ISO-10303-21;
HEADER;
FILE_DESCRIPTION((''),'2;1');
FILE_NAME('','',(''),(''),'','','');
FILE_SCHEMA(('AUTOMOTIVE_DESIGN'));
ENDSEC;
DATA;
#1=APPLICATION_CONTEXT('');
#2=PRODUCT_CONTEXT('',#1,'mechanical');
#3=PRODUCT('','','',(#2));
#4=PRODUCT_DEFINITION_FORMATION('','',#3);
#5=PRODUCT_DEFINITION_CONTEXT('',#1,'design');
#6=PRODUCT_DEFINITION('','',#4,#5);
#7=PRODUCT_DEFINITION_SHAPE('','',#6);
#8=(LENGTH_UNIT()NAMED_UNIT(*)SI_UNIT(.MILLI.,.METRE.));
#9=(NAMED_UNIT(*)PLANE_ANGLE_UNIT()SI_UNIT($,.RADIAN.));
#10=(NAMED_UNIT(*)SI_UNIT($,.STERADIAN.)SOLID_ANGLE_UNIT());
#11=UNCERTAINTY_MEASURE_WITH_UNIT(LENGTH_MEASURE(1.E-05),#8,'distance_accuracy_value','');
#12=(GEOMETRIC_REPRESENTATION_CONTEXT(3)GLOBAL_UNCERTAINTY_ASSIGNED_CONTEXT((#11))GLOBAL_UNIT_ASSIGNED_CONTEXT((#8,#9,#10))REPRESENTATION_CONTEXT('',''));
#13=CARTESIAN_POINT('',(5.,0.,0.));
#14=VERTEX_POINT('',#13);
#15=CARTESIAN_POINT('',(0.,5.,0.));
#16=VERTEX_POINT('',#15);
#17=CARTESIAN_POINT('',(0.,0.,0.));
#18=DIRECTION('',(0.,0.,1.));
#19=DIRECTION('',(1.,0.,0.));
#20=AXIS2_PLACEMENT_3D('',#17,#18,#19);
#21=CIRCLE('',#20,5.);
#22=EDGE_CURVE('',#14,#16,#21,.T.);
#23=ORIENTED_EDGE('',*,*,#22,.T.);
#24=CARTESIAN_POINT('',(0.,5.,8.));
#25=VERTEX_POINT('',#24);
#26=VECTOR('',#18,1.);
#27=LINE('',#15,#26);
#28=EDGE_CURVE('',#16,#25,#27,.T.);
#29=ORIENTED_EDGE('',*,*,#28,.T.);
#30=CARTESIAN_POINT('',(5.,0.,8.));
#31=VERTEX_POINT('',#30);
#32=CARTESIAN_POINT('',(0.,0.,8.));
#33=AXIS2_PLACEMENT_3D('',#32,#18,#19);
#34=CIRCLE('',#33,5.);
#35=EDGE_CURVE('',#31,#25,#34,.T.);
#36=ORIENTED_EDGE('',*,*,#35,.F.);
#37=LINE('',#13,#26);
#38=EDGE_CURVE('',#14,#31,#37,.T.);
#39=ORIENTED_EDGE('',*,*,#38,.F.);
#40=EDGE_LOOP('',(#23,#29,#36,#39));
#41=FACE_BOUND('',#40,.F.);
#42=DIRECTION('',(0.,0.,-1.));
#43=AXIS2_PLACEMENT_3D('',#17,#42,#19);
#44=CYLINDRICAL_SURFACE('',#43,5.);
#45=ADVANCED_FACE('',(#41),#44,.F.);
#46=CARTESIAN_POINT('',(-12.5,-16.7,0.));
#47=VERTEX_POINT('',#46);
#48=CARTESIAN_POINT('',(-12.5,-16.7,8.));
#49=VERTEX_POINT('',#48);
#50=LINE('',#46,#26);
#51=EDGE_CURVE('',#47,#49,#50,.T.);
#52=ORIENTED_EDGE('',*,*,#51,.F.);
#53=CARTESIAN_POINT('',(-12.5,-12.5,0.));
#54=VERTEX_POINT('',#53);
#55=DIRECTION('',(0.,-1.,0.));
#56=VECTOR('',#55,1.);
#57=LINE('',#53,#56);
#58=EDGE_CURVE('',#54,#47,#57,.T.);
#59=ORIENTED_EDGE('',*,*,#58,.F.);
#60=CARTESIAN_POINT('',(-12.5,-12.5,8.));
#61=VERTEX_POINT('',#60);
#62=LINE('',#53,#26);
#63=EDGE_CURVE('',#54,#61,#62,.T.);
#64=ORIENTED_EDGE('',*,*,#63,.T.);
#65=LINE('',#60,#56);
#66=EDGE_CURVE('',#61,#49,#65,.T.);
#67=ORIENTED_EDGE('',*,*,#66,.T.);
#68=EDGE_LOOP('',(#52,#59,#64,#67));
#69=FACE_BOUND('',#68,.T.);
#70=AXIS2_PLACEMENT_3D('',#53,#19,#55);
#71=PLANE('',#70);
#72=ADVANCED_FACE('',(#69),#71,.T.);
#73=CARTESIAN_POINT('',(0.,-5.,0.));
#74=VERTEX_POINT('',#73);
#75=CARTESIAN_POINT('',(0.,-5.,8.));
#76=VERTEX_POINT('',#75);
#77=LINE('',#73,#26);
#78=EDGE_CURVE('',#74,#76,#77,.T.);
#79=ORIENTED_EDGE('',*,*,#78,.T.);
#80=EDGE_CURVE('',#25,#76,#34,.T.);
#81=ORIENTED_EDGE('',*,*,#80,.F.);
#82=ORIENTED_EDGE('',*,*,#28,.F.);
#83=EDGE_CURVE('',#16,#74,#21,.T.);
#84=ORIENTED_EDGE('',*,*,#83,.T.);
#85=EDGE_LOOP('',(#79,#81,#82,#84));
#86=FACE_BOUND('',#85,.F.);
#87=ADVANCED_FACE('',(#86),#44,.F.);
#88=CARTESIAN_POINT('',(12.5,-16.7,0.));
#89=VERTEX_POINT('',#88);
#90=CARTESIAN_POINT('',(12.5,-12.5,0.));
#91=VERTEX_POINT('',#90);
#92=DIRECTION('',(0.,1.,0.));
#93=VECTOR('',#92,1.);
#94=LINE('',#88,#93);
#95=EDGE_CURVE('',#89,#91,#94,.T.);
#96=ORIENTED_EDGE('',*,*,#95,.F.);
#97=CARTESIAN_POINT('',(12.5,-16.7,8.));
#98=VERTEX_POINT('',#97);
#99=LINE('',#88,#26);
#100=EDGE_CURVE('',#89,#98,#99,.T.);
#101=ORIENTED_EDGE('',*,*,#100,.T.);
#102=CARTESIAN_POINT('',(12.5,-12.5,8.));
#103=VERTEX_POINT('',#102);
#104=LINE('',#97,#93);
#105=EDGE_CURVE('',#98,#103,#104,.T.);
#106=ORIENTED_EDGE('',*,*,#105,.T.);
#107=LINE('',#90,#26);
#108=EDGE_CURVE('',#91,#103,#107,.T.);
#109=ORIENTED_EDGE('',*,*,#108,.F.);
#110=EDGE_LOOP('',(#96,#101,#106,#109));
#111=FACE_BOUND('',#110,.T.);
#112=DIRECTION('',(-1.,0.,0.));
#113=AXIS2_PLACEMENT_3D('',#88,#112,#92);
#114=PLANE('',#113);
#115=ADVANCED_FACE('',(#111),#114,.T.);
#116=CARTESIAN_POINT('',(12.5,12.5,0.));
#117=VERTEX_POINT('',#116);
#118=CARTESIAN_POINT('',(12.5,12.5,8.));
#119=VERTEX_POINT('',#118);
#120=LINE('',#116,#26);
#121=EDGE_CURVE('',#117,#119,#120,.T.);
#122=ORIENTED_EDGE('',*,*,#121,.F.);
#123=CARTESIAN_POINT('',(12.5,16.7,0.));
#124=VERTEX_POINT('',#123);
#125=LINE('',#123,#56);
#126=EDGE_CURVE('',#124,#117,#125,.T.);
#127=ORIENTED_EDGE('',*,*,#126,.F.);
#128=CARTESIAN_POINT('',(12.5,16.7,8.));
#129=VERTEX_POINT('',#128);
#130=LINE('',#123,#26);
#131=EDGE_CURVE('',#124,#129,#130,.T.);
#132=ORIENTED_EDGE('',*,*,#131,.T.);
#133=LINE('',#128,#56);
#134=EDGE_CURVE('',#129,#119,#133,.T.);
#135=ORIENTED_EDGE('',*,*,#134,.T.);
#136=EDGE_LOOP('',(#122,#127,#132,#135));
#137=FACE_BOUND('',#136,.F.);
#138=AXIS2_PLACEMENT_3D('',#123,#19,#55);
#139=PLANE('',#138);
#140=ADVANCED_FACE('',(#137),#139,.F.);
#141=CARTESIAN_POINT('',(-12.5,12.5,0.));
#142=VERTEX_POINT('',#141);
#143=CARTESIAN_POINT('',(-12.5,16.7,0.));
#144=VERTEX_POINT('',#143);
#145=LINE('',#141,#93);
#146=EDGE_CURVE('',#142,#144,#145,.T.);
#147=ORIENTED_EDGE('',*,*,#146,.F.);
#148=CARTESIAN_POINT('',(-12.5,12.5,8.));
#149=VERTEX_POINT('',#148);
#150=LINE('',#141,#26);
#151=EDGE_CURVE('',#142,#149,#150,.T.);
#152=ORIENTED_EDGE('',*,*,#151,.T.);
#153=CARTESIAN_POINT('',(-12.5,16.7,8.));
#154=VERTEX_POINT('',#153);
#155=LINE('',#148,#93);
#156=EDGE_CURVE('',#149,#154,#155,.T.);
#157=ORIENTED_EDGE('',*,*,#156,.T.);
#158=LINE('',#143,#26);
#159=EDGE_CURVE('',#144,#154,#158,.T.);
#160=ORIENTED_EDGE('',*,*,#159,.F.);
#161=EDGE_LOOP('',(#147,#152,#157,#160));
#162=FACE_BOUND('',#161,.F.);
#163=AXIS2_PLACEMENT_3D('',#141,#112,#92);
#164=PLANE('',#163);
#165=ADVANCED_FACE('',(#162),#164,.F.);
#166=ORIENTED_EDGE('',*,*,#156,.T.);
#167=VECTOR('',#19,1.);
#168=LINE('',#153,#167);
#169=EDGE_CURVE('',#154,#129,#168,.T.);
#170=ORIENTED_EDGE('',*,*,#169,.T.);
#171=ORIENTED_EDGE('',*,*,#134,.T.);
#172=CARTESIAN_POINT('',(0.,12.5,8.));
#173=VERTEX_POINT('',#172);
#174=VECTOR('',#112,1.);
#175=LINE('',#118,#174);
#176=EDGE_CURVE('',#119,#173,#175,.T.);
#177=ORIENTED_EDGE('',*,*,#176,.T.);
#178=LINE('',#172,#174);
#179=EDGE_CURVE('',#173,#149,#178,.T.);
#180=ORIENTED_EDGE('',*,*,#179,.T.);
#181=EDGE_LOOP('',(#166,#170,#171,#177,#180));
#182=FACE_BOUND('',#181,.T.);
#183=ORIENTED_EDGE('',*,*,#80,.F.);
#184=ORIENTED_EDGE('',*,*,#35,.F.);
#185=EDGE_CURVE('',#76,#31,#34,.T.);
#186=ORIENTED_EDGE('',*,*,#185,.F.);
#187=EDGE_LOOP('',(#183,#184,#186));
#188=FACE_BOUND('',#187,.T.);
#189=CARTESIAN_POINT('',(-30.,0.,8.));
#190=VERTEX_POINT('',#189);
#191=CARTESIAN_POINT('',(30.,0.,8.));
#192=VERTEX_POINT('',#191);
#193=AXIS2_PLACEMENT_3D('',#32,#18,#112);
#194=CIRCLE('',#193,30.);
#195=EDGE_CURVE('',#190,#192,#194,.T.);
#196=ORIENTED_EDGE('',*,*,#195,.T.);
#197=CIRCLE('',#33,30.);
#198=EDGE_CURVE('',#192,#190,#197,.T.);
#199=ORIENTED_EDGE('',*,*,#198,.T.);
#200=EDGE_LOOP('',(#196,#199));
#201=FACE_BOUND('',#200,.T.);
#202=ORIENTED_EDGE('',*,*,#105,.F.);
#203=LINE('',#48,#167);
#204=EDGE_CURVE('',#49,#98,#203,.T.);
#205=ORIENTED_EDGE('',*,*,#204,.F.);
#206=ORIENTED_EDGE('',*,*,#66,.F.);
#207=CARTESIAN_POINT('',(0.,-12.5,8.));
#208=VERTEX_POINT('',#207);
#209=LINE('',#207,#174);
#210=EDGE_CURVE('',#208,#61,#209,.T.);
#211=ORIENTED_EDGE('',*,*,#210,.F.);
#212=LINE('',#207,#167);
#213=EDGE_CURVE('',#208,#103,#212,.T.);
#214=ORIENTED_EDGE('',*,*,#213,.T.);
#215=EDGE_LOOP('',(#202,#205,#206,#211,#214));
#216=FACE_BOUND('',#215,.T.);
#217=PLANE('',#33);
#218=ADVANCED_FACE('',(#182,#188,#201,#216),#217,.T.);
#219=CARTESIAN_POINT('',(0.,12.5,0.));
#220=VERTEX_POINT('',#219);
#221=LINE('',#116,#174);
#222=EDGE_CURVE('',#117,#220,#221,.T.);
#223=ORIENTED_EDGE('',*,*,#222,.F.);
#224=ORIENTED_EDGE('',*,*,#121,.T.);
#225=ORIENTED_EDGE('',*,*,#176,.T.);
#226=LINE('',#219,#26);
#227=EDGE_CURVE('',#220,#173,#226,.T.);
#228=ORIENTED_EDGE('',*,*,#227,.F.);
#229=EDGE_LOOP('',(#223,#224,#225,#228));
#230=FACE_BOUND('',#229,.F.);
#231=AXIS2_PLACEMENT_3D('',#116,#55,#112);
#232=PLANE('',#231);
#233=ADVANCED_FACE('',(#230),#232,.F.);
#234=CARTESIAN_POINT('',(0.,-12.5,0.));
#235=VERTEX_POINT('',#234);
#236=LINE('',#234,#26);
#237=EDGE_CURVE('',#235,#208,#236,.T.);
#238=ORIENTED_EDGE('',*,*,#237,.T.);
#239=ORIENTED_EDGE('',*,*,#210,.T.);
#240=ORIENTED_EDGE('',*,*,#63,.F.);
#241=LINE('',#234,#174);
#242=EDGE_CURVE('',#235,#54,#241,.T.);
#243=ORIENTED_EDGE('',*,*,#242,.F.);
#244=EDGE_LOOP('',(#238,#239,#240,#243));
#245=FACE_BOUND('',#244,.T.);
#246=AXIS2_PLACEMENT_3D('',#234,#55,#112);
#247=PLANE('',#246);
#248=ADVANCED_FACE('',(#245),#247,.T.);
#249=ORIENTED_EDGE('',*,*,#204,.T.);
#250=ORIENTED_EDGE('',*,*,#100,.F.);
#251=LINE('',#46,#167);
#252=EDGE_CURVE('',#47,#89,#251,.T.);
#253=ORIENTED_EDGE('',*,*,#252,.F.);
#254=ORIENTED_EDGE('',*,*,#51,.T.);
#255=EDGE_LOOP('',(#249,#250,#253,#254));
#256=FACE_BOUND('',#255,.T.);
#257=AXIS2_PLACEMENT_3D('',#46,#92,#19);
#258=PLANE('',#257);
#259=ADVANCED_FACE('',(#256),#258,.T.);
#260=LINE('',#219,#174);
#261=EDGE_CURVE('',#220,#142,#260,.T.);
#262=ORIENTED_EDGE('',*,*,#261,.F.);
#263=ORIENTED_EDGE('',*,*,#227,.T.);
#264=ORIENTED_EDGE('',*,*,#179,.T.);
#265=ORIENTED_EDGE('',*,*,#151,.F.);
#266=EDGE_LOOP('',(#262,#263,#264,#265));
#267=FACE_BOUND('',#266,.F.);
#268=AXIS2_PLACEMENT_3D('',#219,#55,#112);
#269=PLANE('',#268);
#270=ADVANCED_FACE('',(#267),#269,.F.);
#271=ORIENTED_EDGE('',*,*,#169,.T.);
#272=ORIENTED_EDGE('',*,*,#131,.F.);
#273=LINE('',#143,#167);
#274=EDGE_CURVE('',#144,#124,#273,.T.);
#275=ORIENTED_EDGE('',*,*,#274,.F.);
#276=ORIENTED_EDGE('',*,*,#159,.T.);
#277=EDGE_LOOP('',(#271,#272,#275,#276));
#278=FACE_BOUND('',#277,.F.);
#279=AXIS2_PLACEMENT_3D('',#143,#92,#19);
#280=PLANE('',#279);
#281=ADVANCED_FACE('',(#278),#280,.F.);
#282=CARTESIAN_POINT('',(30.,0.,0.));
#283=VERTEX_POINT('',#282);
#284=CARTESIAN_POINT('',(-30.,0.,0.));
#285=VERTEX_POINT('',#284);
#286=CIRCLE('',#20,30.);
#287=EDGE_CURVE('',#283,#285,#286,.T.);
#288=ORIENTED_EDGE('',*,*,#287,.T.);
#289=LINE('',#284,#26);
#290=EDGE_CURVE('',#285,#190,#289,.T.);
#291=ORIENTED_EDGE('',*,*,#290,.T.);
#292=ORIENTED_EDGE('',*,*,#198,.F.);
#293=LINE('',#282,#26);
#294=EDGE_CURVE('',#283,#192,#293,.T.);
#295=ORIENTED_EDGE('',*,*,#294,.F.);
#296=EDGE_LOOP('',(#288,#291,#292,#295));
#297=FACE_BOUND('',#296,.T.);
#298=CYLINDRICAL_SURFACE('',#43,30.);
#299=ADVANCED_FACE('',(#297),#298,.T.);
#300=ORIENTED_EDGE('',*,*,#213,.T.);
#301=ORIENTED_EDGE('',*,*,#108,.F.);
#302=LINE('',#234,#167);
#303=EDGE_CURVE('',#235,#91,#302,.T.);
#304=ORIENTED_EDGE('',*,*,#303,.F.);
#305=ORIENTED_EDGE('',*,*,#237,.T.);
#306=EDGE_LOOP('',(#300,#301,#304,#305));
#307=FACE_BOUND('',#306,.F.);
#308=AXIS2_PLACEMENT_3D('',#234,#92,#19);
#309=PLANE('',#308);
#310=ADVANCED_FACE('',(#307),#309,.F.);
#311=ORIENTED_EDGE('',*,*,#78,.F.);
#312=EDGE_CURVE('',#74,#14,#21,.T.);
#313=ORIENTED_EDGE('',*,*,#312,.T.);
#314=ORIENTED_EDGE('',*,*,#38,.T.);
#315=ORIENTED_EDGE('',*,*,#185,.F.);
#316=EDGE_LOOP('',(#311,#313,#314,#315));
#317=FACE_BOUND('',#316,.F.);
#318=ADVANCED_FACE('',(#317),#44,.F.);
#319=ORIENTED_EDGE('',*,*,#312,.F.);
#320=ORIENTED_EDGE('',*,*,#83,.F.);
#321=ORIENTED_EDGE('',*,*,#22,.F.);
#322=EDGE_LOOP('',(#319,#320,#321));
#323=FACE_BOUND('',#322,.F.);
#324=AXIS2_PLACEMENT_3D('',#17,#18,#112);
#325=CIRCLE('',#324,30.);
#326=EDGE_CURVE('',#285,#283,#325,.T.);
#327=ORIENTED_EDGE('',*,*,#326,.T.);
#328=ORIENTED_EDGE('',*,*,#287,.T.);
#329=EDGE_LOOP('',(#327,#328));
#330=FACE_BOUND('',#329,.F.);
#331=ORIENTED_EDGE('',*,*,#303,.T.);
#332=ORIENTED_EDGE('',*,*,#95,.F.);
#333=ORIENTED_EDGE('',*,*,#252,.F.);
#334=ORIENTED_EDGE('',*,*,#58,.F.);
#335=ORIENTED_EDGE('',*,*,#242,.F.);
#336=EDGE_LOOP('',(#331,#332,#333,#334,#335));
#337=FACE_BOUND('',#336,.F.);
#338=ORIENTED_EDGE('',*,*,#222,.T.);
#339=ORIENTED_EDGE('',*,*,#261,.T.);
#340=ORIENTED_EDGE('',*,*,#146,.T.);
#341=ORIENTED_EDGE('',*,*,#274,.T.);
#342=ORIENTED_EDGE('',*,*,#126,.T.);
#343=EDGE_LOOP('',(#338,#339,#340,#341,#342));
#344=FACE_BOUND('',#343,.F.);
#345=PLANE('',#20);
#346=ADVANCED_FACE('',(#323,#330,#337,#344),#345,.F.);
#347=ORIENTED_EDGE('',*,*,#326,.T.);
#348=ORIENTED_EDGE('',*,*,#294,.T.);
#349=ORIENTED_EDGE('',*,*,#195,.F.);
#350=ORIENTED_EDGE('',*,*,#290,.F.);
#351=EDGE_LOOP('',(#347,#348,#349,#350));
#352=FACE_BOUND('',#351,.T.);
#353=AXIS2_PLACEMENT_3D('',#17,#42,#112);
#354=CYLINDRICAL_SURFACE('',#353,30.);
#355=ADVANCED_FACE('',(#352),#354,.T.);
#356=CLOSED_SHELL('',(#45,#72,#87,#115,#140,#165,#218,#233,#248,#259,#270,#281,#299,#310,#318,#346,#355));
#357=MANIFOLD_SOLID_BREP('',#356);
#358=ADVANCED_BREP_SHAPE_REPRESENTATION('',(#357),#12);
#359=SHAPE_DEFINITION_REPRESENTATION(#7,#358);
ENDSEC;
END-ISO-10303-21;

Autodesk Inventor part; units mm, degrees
ref_plane "YZ Plane" through (0, 0, 0) normal (1, 0, 0) x (0, 1, 0)
ref_plane "XZ Plane" through (0, 0, 0) normal (0, 1, 0) x (-1, 0, 0)
ref_plane "XY Plane" through (0, 0, 0) normal (0, 0, 1) x (1, 0, 0)
sketch "Boceto1" plane through (0, 0, 0) normal (0, 0, 1) x (1, 0, 0)
  arc A0 (30, 0) -> (-30, 0) centre (0, 0) ccw
  line L0 (5, 0) -> (30, 0)
  arc A1 (-30, 0) -> (30, 0) centre (0, 0) ccw
  circle A2 centre (0, 0) radius 5
  line L1 (0, 0) -> (0, 12.5)
  line L2 (0, 12.5) -> (-12.5, 12.5)
  line L3 (-12.5, 12.5) -> (-12.5, 16.7)
  line L4 (-12.5, 16.7) -> (12.5, 16.7)
  line L5 (12.5, 16.7) -> (12.5, 12.5)
  line L6 (12.5, 12.5) -> (0, 12.5)
  line L7 (0, 0) -> (0, -12.5)
  line L8 (0, -12.5) -> (-12.5, -12.5)
  line L9 (-12.5, -12.5) -> (-12.5, -16.7)
  line L10 (-12.5, -16.7) -> (12.5, -16.7)
  line L11 (12.5, -16.7) -> (12.5, -12.5)
  line L12 (0, -12.5) -> (12.5, -12.5)
  point P0 (0.3554, 29.9979)
  point P1 (0.3554, -29.9979)
  point P2 (-5, 0)
  dimension "d0" = 60
  dimension "d13" = 10
  dimension "d14" = 12.5
  dimension "d15" = 12.5
  dimension "d16" = 4.2
  dimension "d17" = 25
  dimension "d18" = 12.5
  dimension "d19" = 12.5
  dimension "d20" = 4.2
  dimension "d21" = 25
extrude "Extrusión2" add sketch "Boceto1" along normal blind 8
properties part number "leva00" material "Madera (abedul)"
